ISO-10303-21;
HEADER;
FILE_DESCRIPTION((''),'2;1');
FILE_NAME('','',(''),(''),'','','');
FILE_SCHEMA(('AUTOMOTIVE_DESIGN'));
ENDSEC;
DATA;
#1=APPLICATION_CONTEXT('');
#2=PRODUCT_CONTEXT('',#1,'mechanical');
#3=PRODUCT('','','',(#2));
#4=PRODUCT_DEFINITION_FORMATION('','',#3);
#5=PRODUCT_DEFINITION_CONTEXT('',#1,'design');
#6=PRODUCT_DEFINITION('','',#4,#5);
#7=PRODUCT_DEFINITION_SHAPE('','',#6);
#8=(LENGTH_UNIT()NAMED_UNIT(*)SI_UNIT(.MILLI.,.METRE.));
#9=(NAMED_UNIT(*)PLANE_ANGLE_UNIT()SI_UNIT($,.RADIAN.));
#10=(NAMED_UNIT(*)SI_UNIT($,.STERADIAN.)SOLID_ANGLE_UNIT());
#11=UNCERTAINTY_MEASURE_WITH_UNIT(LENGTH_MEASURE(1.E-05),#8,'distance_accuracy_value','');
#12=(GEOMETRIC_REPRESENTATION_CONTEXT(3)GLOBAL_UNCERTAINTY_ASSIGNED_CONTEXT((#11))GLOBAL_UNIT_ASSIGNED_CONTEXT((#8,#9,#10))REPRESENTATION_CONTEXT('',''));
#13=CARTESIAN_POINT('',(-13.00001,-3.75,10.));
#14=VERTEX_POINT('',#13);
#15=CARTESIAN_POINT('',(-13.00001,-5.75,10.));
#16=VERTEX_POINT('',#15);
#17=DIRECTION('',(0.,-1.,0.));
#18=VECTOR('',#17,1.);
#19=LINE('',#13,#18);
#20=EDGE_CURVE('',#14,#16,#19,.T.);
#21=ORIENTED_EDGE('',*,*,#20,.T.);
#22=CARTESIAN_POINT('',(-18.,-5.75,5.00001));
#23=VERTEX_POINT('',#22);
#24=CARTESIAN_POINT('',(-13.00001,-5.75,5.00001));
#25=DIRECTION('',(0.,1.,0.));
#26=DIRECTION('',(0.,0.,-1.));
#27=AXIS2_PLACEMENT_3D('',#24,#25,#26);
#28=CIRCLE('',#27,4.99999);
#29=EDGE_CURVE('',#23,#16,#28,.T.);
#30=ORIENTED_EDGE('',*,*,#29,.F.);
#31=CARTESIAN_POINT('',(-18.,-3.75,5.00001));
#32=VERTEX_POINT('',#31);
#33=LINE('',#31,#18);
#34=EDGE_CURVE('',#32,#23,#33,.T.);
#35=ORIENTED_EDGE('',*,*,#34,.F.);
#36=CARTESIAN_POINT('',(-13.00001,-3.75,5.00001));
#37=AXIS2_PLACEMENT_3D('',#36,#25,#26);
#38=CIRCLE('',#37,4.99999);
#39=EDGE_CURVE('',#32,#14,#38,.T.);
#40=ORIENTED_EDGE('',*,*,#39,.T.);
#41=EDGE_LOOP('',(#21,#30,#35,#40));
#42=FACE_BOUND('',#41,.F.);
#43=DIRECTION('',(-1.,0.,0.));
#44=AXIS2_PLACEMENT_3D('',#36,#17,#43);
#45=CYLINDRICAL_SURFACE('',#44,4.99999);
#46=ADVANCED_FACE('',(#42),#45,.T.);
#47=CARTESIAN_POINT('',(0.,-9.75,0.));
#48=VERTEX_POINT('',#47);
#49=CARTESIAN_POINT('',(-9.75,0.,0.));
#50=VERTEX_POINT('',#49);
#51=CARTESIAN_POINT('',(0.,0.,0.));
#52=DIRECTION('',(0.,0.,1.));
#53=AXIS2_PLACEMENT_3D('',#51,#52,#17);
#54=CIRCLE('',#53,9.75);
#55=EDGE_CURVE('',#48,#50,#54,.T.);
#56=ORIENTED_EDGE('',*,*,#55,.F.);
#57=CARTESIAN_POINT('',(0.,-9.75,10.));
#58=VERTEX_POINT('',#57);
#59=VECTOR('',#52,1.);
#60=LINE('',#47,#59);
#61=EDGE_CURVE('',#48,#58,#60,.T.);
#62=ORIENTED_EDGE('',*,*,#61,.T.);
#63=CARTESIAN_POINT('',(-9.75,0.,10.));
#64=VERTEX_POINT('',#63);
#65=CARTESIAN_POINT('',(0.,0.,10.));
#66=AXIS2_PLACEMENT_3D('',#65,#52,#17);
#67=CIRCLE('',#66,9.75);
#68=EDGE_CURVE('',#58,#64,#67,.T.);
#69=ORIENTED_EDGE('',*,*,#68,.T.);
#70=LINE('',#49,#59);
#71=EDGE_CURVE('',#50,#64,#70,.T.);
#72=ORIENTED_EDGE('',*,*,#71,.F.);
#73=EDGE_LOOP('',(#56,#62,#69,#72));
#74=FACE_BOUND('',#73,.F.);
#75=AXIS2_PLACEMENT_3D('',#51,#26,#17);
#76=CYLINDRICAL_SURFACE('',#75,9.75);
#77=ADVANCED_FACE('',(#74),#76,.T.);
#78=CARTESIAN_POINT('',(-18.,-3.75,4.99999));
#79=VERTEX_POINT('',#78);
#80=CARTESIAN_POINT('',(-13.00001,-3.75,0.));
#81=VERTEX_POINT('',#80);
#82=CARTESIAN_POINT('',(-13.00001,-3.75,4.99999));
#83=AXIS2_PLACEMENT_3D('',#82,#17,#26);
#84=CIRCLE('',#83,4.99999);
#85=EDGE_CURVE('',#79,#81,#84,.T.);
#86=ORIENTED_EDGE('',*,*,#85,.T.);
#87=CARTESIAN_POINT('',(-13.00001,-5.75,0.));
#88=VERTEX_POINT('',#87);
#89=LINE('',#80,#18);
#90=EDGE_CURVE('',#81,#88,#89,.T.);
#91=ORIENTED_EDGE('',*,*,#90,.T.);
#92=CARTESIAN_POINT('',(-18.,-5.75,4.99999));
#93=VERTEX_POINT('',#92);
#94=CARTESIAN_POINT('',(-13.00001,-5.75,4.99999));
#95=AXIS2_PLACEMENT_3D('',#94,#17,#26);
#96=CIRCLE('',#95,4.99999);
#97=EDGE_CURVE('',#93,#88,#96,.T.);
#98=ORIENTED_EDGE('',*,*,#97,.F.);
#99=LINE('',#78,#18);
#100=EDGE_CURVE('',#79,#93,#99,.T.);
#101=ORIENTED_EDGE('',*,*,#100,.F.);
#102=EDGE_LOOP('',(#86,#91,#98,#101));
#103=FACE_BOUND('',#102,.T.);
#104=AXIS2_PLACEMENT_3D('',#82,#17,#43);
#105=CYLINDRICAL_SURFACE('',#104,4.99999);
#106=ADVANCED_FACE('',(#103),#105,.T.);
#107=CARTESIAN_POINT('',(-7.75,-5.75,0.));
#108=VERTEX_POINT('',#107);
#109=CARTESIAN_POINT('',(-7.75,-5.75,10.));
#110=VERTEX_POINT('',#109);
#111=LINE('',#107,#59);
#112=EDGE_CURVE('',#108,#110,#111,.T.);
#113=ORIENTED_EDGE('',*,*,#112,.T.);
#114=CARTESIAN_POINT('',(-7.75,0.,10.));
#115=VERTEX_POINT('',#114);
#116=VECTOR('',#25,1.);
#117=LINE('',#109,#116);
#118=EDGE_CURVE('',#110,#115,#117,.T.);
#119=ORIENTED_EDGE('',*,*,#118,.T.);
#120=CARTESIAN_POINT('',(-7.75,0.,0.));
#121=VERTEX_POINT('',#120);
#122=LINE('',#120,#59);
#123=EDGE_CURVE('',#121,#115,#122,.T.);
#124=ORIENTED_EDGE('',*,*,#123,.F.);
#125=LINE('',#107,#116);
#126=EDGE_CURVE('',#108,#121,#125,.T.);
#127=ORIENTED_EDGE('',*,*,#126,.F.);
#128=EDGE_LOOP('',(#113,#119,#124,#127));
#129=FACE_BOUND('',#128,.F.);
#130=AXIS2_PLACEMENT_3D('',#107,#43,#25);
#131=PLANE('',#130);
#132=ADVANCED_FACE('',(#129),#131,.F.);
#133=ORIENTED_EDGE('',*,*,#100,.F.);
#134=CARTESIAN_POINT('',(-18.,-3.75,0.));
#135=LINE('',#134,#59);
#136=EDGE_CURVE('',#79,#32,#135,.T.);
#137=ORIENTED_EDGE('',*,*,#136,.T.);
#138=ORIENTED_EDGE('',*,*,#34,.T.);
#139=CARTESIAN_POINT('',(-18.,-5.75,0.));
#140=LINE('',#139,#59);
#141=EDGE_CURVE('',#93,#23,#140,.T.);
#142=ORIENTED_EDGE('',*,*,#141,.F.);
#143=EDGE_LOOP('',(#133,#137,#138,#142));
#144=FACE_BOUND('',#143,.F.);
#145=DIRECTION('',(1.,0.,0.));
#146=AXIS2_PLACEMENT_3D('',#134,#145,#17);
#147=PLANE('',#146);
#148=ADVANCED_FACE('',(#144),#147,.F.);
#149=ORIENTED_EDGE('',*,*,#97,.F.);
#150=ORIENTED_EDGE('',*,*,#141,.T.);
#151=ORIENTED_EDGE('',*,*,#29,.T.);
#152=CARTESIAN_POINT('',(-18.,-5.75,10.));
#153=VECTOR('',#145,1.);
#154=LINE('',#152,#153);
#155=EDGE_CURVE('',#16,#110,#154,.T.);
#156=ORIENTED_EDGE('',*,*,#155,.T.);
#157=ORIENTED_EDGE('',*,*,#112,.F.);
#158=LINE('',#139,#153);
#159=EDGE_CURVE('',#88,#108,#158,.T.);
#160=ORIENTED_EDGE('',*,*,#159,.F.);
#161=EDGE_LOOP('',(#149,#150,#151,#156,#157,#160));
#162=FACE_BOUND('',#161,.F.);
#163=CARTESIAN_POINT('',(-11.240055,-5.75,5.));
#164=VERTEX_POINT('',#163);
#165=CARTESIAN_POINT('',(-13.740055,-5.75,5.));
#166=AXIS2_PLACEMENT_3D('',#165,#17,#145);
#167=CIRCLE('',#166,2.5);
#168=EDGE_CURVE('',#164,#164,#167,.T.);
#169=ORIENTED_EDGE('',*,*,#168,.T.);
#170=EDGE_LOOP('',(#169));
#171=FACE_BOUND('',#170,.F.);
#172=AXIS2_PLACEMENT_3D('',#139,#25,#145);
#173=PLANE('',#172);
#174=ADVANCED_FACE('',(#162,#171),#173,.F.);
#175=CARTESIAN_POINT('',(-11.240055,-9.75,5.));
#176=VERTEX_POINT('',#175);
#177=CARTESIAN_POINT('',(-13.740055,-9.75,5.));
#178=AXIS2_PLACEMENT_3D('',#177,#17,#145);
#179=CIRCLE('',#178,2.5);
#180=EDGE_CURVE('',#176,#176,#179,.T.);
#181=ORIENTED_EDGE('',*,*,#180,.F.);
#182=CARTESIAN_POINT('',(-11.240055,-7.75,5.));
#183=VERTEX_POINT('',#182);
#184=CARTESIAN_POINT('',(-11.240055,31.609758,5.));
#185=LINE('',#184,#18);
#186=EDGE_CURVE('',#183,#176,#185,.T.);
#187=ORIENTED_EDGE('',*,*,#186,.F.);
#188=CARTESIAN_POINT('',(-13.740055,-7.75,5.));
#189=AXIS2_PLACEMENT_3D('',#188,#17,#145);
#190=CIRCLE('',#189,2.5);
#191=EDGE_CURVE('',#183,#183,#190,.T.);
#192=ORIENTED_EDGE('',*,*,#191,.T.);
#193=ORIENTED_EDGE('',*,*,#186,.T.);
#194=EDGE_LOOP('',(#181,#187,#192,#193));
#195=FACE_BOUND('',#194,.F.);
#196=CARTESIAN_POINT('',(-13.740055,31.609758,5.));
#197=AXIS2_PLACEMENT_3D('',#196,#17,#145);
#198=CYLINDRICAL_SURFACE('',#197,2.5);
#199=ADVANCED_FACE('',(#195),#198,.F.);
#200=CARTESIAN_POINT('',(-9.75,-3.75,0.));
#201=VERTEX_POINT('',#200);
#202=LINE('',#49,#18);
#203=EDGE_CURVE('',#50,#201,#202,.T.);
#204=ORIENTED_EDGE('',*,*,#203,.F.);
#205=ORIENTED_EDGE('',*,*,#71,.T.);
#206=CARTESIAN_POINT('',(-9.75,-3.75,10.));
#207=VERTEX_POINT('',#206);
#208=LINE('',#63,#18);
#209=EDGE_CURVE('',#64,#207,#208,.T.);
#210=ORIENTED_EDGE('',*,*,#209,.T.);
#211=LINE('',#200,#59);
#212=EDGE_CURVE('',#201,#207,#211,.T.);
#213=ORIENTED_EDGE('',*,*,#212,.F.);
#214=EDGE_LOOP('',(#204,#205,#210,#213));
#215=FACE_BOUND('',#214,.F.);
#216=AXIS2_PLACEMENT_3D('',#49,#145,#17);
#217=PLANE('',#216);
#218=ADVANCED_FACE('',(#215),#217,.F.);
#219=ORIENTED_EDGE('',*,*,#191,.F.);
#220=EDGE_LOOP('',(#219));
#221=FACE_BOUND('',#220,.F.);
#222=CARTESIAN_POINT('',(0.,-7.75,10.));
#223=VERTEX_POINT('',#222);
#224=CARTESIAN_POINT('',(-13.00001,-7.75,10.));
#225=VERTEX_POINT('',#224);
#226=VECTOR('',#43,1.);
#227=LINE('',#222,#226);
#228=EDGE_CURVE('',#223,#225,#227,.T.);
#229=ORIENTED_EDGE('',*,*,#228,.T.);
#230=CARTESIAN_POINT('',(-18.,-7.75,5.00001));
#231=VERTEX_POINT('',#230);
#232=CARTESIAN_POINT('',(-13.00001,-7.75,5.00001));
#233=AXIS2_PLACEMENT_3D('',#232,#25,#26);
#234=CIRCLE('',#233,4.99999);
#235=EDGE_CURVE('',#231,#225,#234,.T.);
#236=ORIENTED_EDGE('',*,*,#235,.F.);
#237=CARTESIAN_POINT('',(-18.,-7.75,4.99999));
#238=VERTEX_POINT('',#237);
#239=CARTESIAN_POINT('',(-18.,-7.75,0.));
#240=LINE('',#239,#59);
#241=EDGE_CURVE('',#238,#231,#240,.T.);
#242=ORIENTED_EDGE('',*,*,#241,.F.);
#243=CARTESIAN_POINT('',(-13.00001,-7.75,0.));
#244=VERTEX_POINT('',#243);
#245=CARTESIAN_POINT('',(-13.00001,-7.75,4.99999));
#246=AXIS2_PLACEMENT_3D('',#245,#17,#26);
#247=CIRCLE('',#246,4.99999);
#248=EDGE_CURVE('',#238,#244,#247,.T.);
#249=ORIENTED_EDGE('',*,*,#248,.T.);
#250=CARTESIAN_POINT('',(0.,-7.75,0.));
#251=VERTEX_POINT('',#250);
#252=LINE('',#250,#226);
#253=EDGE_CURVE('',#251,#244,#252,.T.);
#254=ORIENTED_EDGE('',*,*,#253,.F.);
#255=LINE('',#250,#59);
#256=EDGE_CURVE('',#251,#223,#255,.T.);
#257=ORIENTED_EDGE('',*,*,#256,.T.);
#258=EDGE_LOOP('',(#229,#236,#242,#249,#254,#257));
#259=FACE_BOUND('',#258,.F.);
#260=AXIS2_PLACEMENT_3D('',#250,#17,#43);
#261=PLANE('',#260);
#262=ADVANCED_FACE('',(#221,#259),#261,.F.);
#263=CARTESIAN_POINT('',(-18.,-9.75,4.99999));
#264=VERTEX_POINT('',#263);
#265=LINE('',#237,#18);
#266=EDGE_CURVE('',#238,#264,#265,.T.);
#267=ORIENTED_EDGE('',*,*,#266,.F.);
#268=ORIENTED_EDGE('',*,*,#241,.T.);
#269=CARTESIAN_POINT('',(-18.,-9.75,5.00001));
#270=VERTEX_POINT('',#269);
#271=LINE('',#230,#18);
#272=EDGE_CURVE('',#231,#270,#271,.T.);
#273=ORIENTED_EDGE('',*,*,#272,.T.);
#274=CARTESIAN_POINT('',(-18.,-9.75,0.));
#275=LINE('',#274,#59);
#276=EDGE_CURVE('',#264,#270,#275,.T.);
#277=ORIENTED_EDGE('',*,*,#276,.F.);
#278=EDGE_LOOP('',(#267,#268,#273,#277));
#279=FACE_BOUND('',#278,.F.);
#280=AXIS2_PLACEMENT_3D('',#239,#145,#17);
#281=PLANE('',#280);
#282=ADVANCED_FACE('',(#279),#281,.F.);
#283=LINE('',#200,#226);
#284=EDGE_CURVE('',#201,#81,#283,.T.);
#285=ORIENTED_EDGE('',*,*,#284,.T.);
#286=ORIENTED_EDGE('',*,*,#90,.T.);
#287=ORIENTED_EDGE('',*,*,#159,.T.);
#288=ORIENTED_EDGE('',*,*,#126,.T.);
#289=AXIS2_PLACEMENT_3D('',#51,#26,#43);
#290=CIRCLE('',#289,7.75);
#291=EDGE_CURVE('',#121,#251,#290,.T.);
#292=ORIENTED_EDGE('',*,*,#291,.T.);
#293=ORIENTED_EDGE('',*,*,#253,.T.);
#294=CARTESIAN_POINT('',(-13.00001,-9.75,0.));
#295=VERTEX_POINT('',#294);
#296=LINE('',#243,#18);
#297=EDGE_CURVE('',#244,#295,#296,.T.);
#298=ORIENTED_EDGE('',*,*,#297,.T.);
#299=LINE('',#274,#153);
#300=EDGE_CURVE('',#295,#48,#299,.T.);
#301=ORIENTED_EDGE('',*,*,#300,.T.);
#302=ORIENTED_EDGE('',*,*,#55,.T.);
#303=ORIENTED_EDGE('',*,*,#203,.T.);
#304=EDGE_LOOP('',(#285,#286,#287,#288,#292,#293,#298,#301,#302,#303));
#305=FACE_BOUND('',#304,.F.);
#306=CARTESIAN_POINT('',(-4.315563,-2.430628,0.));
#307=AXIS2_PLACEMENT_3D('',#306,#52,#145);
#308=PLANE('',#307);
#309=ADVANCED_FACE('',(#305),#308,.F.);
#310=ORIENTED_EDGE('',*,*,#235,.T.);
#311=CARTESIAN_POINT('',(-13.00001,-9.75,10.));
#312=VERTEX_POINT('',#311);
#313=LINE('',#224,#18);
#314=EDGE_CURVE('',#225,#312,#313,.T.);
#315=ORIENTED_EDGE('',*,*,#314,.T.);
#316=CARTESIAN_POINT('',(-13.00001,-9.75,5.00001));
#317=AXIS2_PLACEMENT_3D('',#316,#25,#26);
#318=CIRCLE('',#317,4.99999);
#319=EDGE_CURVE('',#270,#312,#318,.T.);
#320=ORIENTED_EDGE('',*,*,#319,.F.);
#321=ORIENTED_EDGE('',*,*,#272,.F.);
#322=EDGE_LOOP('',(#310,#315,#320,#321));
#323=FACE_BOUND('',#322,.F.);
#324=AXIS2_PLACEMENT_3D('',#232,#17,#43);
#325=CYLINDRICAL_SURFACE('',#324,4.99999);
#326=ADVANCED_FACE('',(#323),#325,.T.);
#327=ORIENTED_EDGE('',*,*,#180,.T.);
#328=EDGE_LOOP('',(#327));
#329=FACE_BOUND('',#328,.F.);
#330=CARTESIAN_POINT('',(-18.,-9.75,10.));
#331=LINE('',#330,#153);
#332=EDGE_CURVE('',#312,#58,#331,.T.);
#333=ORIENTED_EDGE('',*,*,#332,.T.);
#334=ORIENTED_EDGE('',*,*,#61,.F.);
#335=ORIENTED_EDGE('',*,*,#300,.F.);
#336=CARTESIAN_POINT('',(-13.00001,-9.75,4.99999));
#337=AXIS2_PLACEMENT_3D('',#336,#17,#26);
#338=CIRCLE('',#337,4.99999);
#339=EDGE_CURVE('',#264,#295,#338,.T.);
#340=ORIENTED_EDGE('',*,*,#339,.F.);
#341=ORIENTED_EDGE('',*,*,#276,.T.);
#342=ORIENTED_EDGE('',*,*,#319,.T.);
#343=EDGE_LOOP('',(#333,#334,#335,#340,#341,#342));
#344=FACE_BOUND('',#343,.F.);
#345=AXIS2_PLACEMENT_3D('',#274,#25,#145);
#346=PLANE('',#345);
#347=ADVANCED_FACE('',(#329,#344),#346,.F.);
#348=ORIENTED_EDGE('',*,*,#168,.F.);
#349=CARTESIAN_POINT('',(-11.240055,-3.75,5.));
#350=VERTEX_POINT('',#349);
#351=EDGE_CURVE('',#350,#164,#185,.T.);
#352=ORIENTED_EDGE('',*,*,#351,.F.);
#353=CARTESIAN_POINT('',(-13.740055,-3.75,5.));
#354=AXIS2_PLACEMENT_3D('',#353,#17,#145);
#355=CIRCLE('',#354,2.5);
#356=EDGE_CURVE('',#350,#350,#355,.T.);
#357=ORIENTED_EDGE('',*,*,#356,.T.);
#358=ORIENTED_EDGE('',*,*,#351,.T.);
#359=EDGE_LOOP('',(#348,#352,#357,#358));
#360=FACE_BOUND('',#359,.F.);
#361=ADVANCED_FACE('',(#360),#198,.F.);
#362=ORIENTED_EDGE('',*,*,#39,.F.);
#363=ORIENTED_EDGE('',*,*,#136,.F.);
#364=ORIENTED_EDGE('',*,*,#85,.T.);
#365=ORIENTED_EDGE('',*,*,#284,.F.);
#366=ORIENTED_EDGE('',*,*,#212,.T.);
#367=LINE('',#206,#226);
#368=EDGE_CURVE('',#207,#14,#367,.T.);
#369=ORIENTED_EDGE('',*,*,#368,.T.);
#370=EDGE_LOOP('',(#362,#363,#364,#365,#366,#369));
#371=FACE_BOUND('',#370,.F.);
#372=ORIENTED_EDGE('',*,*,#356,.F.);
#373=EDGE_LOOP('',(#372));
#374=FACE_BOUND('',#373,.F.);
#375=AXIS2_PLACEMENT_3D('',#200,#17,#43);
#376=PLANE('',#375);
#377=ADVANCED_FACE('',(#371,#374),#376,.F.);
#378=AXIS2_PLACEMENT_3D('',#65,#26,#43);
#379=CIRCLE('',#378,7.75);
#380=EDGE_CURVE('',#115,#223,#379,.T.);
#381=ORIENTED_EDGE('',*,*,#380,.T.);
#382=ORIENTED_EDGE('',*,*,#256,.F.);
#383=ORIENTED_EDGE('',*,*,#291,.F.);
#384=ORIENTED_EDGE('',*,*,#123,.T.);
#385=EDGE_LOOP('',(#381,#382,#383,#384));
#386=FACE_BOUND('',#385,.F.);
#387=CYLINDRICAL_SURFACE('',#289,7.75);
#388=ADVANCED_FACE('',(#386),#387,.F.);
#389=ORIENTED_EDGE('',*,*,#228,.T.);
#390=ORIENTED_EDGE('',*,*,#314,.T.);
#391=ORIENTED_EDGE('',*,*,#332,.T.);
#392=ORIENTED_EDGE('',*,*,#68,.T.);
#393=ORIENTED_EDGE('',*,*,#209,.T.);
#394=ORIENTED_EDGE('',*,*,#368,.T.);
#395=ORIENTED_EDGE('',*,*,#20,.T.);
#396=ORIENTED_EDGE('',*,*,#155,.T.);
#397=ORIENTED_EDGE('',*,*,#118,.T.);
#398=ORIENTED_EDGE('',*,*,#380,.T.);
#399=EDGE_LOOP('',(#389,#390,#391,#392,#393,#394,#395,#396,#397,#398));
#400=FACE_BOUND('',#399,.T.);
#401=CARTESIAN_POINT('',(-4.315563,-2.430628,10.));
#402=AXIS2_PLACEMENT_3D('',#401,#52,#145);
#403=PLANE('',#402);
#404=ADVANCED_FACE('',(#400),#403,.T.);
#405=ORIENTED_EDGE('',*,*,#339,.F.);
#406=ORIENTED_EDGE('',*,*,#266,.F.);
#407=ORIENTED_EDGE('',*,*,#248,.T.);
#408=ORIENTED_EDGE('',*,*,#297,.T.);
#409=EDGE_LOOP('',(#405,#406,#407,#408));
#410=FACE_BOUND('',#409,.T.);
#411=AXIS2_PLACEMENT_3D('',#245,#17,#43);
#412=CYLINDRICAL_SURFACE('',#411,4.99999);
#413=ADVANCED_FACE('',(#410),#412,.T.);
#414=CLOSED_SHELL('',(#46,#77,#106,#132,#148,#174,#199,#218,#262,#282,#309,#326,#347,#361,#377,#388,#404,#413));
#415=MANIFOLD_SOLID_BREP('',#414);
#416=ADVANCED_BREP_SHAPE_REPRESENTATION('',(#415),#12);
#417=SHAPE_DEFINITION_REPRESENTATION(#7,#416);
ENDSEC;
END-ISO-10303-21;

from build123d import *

# Parameters (mm, degrees)
F1_DEPTH = 10
F2_R     = 4.99999
F4_D     = 5


# Not quite as in the source:
# - a fillet or chamfer is up to 0.001 mm smaller than in the source, because OpenCascade refuses the exact size


with BuildPart() as f1:
    # F0 (on Top) → F1 (new body)
    with BuildSketch(Plane.XY):
        with BuildLine():
            ThreePointArc((-7.75, 0), (5.4800775542, 5.4800775542), (0, -7.75))
            Line((0, -7.75), (-18, -7.75))
            Line((-18, -7.75), (-18, -9.75))
            Line((-18, -9.75), (0, -9.75))
            ThreePointArc((0, -9.75), (6.8942911166, 6.8942911166), (-9.75, 0))
            Line((-9.75, 0), (-9.75, -3.75))
            Line((-9.75, -3.75), (-18, -3.75))
            Line((-18, -3.75), (-18, -5.75))
            Line((-18, -5.75), (-7.75, -5.75))
            Line((-7.75, -5.75), (-7.75, 0))
        make_face()
    extrude(amount=F1_DEPTH)

    # F2 (radius 5 in the source; OpenCascade refuses exactly that, so slightly less here)
    f2_edges = [f1.edges().sort_by_distance(p)[0] for p in [
        (-18, -4.75, 0),
        (-18, -8.75, 0),
        (-18, -8.75, 10),
        (-18, -4.75, 10),
    ]]
    fillet(f2_edges, radius=F2_R)

    # F4 (through all)
    with Locations(Plane(origin=(0, -3.75, 0), x_dir=(-1, 0, 0), z_dir=(0, 1, 0))):
        with Locations((13.740055263, 5)):
            Hole(F4_D / 2)


solid = f1.part
